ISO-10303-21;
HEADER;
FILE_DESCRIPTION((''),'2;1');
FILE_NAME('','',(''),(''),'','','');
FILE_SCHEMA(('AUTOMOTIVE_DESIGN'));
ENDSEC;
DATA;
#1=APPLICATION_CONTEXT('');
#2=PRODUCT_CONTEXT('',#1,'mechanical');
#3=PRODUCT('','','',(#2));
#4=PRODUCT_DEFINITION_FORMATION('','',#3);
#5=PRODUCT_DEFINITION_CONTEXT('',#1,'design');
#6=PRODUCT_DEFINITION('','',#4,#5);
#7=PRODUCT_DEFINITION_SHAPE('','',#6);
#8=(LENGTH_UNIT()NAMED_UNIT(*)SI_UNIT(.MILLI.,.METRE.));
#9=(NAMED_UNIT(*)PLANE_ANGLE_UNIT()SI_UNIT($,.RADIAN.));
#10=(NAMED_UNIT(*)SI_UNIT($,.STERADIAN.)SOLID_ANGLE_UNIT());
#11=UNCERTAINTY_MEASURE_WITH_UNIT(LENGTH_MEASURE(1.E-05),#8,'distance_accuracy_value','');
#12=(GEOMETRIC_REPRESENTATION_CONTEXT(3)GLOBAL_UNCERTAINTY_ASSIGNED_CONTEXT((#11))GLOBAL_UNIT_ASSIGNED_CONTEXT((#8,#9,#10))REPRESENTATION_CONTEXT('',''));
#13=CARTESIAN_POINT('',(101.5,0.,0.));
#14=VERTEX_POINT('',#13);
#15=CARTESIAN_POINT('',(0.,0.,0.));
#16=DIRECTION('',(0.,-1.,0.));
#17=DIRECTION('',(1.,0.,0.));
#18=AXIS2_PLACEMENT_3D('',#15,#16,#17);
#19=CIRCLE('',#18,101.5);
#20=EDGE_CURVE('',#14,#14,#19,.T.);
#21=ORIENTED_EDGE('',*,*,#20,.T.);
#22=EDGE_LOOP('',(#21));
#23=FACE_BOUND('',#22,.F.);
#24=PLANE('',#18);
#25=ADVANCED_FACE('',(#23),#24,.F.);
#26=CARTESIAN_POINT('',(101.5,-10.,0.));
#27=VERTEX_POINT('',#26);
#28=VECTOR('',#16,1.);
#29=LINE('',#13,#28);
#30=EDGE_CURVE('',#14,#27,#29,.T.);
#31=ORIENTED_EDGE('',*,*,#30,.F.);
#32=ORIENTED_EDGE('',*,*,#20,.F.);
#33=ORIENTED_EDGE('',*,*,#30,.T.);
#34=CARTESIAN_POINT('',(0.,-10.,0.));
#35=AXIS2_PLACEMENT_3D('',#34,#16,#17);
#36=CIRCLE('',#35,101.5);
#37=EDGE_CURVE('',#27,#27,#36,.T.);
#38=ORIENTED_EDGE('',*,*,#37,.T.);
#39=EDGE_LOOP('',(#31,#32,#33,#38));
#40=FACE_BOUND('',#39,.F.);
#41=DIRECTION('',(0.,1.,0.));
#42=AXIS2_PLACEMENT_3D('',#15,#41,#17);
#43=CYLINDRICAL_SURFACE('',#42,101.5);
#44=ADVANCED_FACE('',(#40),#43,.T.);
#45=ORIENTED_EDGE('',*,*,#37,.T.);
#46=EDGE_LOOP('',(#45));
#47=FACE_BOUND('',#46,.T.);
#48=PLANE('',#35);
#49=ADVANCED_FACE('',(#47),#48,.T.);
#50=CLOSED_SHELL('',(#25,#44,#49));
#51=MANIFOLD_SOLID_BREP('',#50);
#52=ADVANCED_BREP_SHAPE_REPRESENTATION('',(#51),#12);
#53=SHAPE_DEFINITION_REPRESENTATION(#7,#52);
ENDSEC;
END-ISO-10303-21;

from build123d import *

# Parameters (mm, degrees)
F1_R     = 101.5
F3_DEPTH = 10


# Not quite as in the source:
# - the program builds the solid bodies; features that only make, move or delete a surface that nothing else refers to are left out


with BuildPart() as f3:
    # F1 (on face) → F3 (new body)
    with BuildSketch(Plane.XZ):
        Circle(F1_R)
    extrude(amount=F3_DEPTH)


solid = f3.part
